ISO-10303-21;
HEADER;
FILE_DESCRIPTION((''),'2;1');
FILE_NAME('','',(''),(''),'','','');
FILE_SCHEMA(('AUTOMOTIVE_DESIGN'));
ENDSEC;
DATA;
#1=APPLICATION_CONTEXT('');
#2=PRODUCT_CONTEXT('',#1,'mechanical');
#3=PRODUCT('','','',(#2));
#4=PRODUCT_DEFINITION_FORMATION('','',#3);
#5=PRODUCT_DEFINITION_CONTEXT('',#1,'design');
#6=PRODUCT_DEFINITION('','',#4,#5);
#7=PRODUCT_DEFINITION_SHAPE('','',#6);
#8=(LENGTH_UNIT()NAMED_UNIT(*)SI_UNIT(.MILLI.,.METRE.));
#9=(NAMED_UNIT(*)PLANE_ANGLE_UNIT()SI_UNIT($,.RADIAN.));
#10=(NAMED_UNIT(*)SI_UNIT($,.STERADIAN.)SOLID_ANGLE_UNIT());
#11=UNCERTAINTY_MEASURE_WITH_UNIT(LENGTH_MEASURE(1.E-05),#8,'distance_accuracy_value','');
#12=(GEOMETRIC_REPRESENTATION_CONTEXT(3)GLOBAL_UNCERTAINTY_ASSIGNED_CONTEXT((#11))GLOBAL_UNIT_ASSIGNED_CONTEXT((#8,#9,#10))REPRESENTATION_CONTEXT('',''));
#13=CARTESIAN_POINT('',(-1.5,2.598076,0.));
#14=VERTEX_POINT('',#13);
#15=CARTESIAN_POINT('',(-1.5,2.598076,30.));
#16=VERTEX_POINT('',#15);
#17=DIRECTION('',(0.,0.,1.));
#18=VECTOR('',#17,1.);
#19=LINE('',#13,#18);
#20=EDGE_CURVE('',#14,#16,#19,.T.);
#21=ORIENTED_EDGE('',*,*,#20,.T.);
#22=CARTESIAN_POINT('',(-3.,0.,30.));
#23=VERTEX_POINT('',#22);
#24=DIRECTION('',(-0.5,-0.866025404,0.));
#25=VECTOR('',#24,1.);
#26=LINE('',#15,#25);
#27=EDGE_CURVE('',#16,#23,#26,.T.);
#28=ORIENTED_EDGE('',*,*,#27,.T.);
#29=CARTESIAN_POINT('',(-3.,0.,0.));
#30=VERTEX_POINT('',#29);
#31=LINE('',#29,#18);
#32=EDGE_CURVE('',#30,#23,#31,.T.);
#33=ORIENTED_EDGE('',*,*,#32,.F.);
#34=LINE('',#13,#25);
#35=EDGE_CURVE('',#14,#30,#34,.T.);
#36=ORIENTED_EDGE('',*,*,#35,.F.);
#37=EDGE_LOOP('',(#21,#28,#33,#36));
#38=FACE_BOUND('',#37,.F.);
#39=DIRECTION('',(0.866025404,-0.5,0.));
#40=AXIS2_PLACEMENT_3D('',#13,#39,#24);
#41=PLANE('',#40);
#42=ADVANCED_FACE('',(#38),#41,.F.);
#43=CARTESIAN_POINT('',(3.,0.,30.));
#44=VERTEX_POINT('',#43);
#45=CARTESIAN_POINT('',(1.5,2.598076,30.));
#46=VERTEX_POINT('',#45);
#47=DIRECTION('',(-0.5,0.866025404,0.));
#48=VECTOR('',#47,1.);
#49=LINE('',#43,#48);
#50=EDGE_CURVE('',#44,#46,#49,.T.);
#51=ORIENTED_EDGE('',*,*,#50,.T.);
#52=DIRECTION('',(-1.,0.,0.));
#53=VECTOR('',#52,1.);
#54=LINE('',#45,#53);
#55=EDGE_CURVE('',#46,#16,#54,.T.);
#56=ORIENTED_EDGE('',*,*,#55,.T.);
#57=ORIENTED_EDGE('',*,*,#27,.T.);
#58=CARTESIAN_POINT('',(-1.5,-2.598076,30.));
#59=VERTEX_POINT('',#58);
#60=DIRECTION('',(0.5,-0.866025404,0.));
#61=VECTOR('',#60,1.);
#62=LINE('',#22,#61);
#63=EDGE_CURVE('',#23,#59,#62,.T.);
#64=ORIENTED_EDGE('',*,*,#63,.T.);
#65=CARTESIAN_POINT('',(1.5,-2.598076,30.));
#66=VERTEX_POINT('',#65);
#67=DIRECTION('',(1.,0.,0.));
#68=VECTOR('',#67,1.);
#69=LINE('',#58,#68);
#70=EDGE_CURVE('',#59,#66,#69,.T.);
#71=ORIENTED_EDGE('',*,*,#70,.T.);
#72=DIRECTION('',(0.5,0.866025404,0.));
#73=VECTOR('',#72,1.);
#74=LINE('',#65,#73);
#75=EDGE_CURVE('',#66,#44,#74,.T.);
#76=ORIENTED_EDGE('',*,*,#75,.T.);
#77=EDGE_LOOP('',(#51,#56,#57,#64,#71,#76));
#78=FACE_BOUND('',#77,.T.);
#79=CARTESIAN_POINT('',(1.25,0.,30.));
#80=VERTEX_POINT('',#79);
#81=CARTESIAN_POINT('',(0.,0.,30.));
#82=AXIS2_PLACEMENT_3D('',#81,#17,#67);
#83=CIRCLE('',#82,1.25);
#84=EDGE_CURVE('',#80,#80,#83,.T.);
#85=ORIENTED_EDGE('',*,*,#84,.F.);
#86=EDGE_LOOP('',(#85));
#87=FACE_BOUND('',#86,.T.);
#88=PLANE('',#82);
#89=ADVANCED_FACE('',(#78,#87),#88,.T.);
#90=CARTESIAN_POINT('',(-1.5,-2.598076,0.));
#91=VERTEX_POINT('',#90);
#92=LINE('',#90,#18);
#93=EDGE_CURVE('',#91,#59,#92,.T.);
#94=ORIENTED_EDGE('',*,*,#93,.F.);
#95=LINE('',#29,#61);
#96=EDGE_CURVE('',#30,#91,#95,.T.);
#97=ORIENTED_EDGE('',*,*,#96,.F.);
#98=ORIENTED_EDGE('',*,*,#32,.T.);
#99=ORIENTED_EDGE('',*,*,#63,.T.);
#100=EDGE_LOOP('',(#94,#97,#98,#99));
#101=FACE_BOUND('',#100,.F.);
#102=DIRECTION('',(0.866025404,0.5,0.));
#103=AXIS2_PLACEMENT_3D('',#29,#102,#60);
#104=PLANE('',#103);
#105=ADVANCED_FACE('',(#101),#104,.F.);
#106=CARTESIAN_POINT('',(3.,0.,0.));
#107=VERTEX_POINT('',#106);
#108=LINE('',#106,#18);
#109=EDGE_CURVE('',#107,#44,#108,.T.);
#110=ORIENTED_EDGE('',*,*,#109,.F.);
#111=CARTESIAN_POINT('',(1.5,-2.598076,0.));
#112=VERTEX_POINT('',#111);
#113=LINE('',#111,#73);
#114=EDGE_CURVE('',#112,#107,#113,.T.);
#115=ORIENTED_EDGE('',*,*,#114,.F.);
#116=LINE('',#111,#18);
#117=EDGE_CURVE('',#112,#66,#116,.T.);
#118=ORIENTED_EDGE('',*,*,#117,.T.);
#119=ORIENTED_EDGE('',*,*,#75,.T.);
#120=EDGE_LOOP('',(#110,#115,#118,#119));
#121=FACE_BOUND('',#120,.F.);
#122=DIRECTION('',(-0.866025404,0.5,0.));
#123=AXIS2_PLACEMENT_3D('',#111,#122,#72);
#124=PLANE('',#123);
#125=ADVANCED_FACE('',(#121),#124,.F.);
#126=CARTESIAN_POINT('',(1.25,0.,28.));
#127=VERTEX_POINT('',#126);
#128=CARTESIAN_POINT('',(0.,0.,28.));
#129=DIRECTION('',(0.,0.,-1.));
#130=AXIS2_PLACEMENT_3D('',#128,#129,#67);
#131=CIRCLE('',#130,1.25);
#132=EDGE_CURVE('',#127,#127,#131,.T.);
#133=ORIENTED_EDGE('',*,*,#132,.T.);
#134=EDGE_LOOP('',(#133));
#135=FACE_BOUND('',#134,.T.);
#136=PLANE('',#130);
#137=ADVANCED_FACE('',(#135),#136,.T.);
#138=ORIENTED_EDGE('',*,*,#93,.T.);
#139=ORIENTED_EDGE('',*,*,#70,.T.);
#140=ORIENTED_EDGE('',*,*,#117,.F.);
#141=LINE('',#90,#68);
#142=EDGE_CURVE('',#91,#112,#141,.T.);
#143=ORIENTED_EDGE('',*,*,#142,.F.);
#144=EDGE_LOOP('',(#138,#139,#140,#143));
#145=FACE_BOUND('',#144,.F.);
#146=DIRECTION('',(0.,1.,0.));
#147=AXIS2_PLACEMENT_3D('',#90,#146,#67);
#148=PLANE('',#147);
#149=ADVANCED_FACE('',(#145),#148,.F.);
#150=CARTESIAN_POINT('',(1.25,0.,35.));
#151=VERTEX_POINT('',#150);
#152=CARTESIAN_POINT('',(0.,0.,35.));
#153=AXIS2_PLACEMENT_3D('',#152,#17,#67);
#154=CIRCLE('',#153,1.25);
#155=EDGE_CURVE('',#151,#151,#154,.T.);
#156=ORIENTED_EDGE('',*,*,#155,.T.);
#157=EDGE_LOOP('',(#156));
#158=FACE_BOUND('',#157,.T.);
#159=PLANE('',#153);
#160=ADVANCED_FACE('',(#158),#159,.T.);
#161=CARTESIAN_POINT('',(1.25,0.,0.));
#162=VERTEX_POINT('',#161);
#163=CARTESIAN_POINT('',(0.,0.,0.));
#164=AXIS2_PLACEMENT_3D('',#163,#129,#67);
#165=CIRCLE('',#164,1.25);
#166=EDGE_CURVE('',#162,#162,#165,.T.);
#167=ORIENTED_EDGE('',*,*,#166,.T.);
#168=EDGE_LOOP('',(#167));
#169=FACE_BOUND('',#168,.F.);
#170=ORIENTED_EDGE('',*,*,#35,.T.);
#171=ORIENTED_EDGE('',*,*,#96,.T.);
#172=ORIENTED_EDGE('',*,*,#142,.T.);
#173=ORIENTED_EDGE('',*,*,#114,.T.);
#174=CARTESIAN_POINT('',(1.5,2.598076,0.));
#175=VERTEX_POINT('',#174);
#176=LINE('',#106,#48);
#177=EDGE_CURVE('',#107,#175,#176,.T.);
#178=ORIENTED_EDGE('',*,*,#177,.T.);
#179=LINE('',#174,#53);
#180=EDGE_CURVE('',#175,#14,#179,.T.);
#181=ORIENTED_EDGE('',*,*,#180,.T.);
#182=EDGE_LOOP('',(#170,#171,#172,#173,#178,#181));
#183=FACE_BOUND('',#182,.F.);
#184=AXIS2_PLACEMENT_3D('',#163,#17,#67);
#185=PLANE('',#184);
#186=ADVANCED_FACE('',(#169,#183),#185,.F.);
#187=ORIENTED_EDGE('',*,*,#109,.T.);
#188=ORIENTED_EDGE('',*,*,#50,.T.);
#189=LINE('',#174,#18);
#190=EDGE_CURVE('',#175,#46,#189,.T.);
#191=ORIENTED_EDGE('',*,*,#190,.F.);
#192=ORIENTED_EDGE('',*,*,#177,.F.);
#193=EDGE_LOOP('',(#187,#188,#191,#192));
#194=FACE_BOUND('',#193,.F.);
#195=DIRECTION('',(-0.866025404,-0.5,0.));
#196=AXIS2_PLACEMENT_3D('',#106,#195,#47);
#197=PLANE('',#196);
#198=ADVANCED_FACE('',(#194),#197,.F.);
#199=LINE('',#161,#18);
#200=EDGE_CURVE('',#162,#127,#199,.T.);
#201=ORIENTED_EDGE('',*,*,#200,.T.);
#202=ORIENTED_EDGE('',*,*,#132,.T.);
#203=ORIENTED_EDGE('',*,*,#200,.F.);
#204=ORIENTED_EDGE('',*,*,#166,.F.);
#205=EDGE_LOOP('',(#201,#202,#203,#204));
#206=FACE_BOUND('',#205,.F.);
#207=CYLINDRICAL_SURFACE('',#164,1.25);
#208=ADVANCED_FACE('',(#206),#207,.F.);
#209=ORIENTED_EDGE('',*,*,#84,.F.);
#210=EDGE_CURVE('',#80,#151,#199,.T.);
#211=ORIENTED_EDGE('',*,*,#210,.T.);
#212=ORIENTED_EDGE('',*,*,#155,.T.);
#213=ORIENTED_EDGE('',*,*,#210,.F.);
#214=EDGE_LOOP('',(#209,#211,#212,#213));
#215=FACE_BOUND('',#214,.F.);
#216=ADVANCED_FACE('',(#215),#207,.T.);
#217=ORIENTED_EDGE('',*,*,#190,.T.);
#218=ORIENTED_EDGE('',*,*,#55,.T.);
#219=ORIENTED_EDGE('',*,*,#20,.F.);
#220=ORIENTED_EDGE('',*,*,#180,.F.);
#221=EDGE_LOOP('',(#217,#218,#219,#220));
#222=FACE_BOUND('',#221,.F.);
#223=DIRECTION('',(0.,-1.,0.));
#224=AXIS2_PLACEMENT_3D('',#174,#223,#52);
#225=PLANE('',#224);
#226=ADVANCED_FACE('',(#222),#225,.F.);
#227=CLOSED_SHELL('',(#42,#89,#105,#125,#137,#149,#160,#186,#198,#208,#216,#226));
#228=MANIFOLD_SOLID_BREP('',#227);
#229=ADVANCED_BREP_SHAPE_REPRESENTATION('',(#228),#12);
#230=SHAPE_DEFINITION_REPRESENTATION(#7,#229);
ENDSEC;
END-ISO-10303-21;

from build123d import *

# Parameters (mm, degrees)
F0_R     = 1.25
F1_DEPTH = 30
F2_DEPTH = 35
F3_R     = 1.25
F4_DEPTH = 28


# Not quite as in the source:
# - a feature names something its author has since deleted; it is built from what else it names


with BuildPart() as f1:
    # F0 (on Top) → F1 (new body)
    with BuildSketch(Plane.XY):
        Polygon((1.5, 2.5980762114), (-1.5, 2.5980762114), (-3, 0), (-1.5, -2.5980762114), (1.5, -2.5980762114), (3, 0), align=None)
        Circle(F0_R, mode=Mode.SUBTRACT)
    extrude(amount=F1_DEPTH)

    # F0 (on Top) → F2 (join)
    with BuildSketch(Plane.XY):
        Circle(F0_R)
    extrude(amount=F2_DEPTH)

    # F3 (on face) → F4 (cut)
    with BuildSketch(Plane(origin=(0, 0, 0), x_dir=(1, 0, 0), z_dir=(0, 0, -1))):
        Circle(F3_R)
    extrude(amount=-F4_DEPTH, mode=Mode.SUBTRACT)


solid = f1.part
